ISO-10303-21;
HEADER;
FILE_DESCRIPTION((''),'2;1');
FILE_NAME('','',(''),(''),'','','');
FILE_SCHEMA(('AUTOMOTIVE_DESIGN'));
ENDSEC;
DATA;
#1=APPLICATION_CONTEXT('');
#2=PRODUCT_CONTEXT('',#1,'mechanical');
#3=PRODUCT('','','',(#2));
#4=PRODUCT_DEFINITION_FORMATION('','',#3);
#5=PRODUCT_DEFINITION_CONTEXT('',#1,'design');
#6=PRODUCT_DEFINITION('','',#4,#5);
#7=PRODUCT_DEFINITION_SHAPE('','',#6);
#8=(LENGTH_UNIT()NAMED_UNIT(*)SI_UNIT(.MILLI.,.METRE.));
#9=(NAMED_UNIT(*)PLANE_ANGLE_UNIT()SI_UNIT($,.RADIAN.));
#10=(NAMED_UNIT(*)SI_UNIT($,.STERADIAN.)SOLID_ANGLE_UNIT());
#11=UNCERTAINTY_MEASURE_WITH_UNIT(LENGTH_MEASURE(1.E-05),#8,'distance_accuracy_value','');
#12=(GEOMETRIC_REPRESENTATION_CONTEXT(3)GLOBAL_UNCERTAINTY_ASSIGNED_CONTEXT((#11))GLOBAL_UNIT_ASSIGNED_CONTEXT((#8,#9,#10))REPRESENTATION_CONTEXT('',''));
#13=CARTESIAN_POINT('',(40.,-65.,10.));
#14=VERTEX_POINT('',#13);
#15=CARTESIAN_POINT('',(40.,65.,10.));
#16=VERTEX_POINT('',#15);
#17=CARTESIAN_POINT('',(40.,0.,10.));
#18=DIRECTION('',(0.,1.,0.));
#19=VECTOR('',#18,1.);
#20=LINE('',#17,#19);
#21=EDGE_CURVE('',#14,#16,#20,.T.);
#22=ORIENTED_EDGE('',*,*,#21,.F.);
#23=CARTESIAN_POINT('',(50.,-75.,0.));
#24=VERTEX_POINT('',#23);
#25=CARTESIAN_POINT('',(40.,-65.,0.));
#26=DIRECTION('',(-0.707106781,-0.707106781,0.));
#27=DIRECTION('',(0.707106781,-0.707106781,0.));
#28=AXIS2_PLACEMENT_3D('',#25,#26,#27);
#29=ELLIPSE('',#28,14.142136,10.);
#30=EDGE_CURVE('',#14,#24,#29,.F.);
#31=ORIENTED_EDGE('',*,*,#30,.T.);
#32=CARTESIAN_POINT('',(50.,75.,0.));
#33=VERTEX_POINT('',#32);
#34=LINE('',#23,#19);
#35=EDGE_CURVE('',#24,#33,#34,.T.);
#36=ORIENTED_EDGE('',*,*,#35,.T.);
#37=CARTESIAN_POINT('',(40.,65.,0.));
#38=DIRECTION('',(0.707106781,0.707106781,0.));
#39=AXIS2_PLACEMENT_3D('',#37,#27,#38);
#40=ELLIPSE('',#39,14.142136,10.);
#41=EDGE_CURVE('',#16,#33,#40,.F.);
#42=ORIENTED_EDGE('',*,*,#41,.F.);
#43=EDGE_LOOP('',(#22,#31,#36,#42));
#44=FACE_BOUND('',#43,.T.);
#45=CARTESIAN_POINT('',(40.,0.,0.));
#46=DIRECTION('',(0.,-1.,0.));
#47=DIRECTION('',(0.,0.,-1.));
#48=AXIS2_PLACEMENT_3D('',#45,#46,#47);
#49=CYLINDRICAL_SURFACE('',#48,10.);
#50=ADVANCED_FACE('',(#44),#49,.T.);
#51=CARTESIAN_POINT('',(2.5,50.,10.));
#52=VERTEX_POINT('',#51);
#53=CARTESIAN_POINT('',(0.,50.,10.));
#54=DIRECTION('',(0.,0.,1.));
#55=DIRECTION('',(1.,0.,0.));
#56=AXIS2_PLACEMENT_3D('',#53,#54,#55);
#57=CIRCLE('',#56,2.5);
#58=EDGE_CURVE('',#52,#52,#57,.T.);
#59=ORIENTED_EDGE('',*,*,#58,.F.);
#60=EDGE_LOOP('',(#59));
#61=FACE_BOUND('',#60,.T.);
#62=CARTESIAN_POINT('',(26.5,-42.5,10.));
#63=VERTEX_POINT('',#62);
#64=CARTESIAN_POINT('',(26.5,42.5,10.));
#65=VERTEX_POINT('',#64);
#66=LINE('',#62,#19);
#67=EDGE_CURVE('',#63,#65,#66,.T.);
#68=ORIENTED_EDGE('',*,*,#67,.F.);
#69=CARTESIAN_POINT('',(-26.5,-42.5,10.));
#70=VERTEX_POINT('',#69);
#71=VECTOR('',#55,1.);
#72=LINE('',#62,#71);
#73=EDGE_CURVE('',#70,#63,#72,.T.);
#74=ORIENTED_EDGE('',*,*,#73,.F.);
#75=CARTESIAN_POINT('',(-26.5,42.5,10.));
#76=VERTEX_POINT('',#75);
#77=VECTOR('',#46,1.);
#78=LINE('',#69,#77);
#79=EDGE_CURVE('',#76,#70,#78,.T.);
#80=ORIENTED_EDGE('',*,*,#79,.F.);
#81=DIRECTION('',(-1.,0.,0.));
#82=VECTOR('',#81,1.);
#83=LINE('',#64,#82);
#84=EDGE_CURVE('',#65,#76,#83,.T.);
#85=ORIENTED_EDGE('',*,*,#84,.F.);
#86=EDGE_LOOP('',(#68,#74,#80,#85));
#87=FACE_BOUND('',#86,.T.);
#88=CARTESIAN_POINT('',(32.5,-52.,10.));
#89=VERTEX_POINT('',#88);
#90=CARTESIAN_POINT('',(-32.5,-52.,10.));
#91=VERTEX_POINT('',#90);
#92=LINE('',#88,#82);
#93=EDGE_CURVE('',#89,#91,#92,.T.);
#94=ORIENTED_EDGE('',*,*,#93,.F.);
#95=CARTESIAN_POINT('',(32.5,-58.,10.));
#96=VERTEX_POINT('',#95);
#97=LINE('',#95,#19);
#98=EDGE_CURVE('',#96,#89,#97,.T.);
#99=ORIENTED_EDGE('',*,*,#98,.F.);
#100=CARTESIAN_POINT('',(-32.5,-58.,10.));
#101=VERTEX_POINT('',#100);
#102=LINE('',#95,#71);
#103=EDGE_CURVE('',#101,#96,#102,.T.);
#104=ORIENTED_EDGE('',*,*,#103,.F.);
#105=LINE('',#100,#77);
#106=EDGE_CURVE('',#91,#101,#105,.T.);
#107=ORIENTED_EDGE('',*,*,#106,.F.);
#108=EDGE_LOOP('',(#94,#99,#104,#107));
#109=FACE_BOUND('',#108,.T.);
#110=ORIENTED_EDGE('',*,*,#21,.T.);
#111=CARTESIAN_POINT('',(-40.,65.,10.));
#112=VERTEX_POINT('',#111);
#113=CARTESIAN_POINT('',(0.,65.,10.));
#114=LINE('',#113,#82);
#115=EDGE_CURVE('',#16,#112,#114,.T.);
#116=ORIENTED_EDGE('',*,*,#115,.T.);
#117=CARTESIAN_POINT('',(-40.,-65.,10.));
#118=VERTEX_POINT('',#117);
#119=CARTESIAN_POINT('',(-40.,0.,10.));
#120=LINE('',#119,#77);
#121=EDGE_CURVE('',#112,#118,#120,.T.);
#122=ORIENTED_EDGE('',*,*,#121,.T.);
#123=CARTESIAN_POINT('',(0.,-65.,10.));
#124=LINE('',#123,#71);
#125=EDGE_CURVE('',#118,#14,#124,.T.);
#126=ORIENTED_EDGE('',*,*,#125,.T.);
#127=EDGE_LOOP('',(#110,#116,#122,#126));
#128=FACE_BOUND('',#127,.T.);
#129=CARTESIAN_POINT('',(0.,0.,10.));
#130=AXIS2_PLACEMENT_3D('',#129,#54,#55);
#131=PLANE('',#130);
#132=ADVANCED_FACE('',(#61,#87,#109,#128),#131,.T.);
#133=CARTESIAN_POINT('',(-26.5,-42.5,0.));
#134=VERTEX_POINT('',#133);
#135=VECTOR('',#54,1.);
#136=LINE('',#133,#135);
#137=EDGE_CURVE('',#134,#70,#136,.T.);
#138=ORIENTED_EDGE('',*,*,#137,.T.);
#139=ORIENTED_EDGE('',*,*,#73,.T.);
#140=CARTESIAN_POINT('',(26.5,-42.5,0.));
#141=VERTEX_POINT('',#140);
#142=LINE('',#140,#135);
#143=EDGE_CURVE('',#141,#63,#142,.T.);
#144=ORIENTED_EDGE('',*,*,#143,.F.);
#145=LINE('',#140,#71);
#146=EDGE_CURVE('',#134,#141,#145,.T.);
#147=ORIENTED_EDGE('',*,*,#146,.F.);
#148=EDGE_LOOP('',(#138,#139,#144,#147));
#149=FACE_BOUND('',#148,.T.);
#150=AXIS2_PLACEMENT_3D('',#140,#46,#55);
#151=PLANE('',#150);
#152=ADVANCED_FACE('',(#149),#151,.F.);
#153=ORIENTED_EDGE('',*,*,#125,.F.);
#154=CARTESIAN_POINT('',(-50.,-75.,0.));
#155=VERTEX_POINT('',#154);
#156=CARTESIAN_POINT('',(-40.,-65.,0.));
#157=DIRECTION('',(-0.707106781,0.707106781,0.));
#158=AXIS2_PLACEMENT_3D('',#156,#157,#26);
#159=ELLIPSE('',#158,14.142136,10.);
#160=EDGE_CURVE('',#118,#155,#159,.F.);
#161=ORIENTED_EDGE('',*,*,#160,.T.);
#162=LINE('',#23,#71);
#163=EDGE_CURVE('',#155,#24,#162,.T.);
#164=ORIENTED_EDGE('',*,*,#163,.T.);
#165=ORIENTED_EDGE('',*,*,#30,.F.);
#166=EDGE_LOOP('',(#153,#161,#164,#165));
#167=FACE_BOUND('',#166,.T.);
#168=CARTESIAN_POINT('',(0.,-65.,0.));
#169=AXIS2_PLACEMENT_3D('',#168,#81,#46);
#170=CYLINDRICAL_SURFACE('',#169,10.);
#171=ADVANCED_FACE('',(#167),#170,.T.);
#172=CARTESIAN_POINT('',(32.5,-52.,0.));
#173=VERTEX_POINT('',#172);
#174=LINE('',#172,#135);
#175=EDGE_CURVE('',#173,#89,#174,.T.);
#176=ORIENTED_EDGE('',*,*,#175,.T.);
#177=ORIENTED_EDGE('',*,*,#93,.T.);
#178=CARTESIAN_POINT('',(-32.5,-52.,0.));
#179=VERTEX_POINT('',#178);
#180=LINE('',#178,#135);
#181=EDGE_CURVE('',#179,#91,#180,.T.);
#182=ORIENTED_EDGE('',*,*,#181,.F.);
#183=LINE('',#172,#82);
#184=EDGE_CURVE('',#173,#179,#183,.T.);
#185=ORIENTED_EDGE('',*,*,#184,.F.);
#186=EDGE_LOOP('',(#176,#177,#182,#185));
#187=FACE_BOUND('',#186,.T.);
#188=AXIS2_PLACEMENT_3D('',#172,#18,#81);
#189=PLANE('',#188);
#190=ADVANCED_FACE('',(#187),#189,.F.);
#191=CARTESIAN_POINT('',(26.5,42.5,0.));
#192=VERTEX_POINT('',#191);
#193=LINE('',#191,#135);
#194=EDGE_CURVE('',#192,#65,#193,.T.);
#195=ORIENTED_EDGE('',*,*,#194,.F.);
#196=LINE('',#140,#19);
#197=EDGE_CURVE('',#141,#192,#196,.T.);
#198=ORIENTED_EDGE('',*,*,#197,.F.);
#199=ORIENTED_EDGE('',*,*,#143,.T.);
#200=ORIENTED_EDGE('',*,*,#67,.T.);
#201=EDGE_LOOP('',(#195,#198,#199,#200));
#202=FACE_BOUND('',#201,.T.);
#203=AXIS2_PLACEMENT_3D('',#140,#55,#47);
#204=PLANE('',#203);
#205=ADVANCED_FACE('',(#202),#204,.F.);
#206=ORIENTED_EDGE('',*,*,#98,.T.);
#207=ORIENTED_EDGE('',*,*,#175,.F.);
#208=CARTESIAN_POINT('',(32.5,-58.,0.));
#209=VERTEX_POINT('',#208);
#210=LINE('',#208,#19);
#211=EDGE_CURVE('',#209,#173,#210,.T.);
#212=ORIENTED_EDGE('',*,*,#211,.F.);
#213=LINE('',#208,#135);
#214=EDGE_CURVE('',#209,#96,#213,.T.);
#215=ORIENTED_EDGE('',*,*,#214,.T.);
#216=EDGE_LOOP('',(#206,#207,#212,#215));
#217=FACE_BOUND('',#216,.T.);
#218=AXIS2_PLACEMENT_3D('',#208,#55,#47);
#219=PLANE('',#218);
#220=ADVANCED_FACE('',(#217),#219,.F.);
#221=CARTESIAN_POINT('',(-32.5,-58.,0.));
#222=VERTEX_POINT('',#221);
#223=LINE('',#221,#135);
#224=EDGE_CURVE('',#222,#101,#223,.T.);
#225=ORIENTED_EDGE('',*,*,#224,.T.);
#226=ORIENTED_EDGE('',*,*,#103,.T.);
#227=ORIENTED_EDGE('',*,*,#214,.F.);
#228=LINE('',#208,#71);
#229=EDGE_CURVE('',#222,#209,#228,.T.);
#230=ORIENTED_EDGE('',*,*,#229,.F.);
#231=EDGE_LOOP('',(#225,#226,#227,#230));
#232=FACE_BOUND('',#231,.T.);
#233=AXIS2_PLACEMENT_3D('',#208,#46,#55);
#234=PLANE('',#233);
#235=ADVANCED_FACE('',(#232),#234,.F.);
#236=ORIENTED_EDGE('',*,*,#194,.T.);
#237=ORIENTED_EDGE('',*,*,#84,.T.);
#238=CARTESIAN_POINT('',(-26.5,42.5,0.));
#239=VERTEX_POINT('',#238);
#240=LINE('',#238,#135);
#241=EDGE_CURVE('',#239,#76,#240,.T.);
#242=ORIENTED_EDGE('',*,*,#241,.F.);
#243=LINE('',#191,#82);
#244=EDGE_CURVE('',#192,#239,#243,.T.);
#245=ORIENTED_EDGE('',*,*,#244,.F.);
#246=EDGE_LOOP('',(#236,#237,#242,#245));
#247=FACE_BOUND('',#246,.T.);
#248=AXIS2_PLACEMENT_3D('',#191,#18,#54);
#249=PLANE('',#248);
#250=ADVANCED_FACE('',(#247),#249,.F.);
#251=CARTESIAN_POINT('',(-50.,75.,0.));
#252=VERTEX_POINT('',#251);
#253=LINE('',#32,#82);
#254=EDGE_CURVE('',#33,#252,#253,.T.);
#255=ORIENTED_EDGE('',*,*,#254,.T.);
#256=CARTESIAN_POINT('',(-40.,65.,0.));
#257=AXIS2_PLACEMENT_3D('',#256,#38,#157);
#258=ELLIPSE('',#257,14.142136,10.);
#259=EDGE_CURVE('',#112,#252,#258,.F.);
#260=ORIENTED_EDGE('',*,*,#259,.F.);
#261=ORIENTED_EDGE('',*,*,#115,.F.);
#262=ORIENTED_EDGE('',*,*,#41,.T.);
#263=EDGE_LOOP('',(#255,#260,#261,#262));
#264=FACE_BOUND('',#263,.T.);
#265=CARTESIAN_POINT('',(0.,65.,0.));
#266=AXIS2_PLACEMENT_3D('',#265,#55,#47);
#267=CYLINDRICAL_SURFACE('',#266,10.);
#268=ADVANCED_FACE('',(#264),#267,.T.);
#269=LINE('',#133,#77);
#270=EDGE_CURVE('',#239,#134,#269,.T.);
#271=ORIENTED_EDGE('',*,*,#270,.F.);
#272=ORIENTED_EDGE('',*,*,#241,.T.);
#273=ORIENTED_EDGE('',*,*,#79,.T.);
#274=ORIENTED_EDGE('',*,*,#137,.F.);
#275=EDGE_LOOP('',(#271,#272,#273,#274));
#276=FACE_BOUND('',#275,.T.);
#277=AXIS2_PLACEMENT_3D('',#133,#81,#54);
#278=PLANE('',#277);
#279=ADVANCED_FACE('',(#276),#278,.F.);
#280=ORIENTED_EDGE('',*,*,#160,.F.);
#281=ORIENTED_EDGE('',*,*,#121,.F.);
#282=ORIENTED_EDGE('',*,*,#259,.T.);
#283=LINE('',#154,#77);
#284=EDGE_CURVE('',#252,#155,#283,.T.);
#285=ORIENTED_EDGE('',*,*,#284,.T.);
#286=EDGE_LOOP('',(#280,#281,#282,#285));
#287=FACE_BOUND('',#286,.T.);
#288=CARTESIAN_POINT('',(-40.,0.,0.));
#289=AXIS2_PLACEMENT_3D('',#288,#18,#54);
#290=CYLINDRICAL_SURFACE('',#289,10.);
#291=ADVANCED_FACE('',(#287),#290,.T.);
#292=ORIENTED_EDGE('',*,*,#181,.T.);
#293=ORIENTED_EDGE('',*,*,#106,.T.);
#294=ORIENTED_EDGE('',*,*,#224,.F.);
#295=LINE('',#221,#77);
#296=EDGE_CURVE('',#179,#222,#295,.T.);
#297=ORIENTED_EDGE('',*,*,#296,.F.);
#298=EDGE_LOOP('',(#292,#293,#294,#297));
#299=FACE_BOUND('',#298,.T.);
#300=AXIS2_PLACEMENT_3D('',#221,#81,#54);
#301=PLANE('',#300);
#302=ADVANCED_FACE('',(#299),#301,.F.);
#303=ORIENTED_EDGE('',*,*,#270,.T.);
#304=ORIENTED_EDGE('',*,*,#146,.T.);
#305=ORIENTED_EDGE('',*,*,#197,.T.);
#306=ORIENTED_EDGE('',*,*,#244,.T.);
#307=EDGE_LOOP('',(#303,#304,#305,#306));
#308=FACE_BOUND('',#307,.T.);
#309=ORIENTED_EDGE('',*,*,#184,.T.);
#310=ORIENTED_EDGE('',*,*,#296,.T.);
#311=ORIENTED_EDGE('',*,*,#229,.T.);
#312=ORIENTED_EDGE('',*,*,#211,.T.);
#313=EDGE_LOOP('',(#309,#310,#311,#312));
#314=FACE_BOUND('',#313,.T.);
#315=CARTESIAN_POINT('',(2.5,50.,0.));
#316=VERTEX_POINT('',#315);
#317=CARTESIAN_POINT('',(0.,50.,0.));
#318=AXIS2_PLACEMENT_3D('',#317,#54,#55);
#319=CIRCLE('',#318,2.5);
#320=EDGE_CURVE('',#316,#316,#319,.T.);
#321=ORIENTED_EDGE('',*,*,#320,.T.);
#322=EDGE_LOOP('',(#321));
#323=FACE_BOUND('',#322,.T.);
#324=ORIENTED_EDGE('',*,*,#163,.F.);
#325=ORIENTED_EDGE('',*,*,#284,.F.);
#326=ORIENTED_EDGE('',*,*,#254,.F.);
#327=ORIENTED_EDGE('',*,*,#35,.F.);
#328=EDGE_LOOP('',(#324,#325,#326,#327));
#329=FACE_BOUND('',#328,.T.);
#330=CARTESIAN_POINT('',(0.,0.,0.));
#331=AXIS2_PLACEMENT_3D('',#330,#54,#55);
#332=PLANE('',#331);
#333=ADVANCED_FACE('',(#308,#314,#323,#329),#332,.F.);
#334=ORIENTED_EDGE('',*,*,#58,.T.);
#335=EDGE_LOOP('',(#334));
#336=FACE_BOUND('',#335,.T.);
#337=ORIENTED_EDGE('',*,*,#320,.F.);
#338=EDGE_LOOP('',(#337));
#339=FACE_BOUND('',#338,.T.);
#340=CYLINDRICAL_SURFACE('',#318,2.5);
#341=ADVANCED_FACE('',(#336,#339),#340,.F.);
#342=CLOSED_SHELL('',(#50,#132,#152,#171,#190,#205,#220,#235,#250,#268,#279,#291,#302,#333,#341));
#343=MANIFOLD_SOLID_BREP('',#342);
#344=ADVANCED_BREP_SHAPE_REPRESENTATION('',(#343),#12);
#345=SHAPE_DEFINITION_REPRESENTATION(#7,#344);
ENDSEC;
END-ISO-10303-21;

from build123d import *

# Parameters (mm, degrees)
SKETCH2_W           = 100
SKETCH2_H           = 150
BOSS_EXTRUDE1_DEPTH = 10
FILLET1_R           = 10
SKETCH3_R           = 2.5
CUT_EXTRUDE1_DEPTH  = 10
SKETCH4_W           = 53
SKETCH4_H           = 85
CUT_EXTRUDE2_DEPTH  = 10
SKETCH5_W           = 65
SKETCH5_H           = 6
CUT_EXTRUDE3_DEPTH  = 10


with BuildPart() as part:
    # Sketch2 → Boss-Extrude1 (new body)
    with BuildSketch(Plane.XY):
        Rectangle(SKETCH2_W, SKETCH2_H)
    extrude(amount=BOSS_EXTRUDE1_DEPTH)

    # Fillet1
    fillet1_edges = [part.edges().sort_by_distance(p)[0] for p in [
        (50, 0, 10),
        (0, 75, 10),
        (-50, 0, 10),
        (0, -75, 10),
    ]]
    fillet(fillet1_edges, radius=FILLET1_R - 0.0001)  # a hair under: the kernel refuses the full size

    # Sketch3 → Cut-Extrude1 (cut)
    with BuildSketch(Plane.XY.offset(10)):
        with Locations((0, 50)):
            Circle(SKETCH3_R)
    extrude(amount=-CUT_EXTRUDE1_DEPTH, mode=Mode.SUBTRACT)

    # Sketch4 → Cut-Extrude2 (cut)
    with BuildSketch(Plane.XY.offset(10)):
        Rectangle(SKETCH4_W, SKETCH4_H)
    extrude(amount=-CUT_EXTRUDE2_DEPTH, mode=Mode.SUBTRACT)

    # Sketch5 → Cut-Extrude3 (cut)
    with BuildSketch(Plane.XY.offset(10)):
        with Locations((0, -55)):
            Rectangle(SKETCH5_W, SKETCH5_H)
    extrude(amount=-CUT_EXTRUDE3_DEPTH, mode=Mode.SUBTRACT)


solid = part.part
